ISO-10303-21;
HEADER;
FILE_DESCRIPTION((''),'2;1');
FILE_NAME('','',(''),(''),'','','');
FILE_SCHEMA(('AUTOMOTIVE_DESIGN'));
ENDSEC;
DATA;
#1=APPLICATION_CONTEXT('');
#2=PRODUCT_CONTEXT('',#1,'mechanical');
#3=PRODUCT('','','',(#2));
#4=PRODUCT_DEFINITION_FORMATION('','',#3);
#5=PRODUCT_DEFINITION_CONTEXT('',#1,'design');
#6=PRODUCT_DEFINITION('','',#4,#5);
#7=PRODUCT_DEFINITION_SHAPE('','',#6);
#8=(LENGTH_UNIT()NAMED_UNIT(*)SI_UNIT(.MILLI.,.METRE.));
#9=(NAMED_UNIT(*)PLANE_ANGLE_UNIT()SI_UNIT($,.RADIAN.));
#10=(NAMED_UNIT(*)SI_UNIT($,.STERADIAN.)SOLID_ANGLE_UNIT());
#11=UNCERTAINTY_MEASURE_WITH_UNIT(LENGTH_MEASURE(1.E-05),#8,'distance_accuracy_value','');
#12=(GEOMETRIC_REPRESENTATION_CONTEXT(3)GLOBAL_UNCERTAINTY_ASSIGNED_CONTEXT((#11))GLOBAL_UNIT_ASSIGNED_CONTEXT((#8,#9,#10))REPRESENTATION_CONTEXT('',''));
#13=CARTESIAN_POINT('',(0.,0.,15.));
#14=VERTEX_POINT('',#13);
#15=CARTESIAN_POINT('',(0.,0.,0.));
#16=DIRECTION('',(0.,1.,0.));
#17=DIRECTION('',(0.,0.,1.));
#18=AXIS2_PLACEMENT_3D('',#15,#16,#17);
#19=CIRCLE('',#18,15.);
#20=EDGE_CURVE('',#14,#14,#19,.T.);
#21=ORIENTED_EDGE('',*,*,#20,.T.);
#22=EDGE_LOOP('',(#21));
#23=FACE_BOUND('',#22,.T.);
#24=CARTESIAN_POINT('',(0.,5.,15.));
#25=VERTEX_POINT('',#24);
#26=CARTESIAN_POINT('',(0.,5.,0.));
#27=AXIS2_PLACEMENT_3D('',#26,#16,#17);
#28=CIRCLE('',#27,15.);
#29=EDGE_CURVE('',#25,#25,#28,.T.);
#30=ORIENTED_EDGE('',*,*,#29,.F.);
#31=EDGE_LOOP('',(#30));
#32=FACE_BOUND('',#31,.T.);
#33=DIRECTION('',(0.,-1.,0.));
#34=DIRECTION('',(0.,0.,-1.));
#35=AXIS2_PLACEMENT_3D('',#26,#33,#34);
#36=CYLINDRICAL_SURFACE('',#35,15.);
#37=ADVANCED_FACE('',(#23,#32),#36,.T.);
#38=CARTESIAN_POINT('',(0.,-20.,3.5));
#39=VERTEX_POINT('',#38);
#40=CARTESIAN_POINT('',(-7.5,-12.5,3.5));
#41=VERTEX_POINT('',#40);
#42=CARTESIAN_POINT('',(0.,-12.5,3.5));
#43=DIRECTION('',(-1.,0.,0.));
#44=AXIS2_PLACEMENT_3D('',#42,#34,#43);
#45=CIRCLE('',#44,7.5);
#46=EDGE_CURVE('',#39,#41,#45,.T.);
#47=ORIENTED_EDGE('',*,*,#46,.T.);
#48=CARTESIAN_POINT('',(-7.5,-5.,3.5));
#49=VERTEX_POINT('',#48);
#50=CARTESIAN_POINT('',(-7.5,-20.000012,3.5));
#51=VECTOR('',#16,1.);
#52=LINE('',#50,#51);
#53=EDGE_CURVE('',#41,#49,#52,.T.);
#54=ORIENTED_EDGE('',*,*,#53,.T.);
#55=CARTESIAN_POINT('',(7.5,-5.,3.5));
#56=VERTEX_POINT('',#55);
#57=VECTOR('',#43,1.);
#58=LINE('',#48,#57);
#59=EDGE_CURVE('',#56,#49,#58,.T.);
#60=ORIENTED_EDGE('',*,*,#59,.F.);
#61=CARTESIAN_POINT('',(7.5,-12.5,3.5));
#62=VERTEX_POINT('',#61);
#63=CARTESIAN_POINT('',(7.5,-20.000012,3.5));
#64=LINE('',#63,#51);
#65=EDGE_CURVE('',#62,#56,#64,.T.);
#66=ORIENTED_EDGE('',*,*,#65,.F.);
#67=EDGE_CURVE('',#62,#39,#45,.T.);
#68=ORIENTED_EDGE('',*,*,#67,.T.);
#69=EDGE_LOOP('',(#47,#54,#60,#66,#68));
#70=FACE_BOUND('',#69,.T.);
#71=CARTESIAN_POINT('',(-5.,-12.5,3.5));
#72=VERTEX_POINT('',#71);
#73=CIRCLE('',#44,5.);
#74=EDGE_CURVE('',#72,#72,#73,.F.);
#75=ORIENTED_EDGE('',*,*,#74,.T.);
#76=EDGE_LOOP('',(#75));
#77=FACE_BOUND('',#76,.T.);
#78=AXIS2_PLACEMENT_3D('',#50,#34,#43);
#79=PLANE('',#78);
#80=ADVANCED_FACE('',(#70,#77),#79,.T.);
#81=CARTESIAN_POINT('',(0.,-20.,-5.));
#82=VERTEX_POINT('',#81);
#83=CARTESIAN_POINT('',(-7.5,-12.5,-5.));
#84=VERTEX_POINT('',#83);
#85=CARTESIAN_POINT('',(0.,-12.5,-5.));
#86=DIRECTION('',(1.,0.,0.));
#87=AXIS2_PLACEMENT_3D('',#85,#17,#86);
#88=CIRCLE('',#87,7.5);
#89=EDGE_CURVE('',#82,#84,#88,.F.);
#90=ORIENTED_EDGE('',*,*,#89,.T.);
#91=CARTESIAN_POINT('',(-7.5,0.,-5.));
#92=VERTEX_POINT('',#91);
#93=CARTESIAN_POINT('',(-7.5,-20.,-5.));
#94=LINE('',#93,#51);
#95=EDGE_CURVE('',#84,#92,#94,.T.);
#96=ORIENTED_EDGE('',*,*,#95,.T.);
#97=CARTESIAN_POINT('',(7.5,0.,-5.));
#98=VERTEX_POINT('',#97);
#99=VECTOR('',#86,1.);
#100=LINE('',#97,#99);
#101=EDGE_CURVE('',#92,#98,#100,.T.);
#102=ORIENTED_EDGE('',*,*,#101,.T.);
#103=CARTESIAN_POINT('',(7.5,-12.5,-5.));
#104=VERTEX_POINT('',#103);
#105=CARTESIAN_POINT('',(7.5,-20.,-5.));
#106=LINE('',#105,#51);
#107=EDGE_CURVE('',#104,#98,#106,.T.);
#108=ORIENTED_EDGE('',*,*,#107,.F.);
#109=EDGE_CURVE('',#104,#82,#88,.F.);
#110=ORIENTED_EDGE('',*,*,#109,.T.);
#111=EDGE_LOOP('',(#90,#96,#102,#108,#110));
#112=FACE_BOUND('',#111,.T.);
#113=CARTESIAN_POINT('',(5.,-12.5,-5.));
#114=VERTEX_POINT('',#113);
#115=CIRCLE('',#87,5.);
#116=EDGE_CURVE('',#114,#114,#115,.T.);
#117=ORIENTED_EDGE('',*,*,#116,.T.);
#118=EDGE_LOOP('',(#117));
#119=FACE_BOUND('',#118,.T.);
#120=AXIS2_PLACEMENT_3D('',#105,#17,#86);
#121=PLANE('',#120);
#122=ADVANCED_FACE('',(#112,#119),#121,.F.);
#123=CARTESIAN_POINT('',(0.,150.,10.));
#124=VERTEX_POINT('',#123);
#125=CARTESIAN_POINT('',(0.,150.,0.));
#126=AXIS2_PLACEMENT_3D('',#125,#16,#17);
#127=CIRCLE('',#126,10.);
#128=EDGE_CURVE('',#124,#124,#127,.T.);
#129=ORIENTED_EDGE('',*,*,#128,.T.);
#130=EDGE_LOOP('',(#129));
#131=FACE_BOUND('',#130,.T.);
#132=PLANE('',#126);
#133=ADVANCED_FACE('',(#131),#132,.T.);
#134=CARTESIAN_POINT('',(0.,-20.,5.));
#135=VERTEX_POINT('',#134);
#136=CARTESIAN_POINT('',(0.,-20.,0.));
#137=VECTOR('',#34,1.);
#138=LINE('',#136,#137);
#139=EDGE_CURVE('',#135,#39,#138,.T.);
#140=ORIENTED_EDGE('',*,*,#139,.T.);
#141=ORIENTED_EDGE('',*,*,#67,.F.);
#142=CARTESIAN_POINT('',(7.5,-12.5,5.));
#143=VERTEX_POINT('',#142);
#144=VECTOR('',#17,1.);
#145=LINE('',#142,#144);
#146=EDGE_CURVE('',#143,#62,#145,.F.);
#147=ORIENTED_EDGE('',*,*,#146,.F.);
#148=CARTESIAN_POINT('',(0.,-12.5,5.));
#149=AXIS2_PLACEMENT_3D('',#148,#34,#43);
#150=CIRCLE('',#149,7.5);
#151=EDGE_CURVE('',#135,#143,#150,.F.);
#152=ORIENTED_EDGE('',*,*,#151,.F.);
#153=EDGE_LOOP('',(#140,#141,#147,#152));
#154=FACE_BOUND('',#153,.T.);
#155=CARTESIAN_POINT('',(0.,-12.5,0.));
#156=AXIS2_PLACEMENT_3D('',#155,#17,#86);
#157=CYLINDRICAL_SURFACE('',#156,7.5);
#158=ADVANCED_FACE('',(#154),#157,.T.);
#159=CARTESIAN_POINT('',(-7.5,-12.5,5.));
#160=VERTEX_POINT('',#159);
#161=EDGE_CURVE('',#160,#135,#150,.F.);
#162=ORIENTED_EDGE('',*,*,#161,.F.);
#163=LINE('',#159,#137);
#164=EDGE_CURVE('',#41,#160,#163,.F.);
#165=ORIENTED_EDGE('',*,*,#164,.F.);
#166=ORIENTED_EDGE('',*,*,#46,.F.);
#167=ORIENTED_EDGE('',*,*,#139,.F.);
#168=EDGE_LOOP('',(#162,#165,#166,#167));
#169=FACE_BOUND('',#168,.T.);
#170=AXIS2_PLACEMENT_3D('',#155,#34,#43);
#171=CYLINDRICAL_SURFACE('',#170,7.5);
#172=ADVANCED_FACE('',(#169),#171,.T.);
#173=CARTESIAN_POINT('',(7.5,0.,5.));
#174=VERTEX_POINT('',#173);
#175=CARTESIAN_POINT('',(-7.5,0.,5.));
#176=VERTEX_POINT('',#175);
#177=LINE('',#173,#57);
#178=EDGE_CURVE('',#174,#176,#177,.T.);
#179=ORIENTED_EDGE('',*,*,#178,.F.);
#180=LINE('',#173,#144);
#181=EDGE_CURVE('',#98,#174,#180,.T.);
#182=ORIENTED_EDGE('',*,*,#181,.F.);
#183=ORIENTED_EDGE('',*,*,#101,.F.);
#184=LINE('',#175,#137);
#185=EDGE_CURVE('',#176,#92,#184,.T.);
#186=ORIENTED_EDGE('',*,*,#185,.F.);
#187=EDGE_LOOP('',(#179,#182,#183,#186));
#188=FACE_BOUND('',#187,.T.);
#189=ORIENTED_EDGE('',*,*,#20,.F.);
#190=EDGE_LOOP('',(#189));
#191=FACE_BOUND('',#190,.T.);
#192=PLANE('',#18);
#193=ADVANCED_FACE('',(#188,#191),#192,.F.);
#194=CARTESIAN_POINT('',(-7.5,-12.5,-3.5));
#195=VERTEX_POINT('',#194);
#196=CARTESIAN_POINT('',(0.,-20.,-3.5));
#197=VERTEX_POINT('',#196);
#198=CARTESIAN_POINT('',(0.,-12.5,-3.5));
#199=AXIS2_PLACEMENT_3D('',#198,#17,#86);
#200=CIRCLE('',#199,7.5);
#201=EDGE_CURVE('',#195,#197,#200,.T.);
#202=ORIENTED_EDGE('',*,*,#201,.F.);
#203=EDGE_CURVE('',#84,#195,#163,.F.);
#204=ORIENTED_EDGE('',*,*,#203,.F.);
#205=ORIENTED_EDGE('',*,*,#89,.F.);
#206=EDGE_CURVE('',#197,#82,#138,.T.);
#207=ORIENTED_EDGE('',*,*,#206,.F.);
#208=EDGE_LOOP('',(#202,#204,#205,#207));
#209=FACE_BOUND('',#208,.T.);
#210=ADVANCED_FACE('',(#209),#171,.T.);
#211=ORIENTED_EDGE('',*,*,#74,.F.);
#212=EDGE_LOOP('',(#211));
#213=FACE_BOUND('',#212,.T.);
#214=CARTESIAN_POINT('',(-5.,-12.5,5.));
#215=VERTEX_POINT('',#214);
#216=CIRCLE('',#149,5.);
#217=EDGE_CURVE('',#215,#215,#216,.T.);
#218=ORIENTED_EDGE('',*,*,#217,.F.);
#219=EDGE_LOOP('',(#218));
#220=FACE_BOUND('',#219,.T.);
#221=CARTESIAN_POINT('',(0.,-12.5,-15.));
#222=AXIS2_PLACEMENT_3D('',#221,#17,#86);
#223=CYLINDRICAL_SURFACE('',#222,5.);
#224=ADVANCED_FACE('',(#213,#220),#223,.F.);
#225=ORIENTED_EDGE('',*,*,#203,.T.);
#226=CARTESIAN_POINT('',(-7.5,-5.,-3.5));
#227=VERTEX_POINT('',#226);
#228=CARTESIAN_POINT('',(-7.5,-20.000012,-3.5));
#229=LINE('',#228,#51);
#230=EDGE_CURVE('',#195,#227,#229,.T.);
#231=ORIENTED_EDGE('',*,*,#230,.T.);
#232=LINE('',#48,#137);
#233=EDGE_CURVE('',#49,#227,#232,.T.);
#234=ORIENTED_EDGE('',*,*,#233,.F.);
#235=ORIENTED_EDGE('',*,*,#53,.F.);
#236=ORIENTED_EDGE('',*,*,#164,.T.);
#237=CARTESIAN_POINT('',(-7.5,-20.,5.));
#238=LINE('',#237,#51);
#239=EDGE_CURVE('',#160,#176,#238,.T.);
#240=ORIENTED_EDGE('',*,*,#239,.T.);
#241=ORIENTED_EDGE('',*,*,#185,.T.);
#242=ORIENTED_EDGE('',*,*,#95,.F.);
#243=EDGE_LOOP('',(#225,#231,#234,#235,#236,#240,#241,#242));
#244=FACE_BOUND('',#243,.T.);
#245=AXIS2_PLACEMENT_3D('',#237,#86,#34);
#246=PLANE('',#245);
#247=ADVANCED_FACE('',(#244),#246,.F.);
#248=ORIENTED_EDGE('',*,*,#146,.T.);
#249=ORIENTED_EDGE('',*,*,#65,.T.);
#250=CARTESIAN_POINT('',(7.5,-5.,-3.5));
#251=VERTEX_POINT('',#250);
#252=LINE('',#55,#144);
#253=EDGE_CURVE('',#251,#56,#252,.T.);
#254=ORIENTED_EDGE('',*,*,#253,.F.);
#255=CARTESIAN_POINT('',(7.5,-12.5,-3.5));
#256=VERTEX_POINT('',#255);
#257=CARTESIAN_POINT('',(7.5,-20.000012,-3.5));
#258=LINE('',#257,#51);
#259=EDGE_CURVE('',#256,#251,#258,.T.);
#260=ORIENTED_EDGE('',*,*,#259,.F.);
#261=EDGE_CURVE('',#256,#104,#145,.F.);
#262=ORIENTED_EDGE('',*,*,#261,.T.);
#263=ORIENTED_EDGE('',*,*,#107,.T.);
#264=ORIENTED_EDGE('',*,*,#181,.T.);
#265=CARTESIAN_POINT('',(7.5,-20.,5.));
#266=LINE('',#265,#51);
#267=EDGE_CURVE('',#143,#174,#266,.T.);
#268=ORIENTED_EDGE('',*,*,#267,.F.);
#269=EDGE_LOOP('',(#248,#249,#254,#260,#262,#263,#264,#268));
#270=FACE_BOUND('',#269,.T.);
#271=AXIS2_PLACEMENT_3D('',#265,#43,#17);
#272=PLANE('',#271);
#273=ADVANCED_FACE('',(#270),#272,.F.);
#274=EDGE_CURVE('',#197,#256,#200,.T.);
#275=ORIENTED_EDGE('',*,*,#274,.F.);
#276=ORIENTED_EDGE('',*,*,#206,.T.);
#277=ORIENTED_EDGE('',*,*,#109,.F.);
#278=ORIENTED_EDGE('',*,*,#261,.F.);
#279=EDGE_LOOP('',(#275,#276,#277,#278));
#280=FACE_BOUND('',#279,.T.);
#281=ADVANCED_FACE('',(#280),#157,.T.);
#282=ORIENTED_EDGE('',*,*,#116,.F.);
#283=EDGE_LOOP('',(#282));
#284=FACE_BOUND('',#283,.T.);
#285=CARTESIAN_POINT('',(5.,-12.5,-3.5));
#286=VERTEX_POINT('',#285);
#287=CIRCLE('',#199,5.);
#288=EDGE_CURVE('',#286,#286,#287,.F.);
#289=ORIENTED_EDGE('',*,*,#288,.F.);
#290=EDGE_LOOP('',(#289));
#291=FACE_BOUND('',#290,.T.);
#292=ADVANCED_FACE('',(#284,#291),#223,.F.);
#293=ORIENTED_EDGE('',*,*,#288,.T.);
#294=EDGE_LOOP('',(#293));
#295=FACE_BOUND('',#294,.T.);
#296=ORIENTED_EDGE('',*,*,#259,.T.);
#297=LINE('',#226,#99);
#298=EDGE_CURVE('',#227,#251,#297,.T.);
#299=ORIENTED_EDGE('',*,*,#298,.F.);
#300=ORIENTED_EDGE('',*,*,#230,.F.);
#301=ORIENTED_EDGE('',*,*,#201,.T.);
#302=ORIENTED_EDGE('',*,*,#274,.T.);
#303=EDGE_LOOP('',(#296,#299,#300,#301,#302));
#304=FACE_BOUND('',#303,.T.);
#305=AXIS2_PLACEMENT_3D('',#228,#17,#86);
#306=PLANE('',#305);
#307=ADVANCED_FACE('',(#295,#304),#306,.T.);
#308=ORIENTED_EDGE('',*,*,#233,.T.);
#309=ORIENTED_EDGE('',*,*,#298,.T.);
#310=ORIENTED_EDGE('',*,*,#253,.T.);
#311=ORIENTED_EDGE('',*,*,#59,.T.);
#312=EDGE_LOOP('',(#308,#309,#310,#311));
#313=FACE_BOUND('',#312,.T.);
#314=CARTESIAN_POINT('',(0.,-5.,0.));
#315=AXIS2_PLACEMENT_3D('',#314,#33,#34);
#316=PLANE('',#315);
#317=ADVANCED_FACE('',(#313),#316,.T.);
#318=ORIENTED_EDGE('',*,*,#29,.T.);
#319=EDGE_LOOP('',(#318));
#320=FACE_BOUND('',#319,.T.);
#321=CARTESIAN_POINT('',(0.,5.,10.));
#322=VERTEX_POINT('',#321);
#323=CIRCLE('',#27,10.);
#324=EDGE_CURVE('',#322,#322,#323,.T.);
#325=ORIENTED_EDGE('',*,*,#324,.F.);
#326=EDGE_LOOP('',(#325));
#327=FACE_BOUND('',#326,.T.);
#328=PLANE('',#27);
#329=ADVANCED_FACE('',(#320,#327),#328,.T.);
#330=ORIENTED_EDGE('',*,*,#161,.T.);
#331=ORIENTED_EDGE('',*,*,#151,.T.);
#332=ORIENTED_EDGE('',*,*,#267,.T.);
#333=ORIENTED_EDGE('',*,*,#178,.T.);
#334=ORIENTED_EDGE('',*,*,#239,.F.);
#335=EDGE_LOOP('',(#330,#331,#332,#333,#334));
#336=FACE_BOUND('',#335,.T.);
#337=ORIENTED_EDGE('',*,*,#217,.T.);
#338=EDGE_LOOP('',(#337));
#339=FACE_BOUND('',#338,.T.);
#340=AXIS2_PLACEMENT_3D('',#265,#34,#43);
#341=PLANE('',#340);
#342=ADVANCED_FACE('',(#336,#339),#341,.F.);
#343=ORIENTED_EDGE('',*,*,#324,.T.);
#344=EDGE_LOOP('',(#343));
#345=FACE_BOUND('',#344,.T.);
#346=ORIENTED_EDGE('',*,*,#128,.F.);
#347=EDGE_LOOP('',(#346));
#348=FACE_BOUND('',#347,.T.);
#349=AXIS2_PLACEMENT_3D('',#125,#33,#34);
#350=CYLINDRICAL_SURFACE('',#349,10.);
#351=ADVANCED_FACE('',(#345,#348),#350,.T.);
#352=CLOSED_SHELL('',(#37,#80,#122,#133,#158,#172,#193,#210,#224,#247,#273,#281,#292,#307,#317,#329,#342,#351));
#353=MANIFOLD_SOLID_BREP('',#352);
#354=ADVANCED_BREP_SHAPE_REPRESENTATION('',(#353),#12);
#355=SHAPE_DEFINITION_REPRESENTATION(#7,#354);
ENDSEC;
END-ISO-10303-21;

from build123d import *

# Parameters (mm, degrees)
SKETCH1_R               = 15
BOSS_EXTRUDE1_DEPTH     = 5
SKETCH2_R               = 10
BOSS_EXTRUDE2_DEPTH     = 145
SKETCH3_W               = 15
SKETCH3_H               = 10
BOSS_EXTRUDE3_DEPTH     = 20
CUT_EXTRUDE1_DEPTH      = 153.069063257
CUT_EXTRUDE1_DEPTH_BACK = 153.069063257
SKETCH4_R               = 5
CUT_EXTRUDE2_DEPTH      = 172.31841699
CUT_EXTRUDE2_DEPTH_BACK = 15
SKETCH5_W               = 15
SKETCH5_H               = 7
FILLET1_R               = 7.5


with BuildPart() as part:
    # Sketch1 → Boss-Extrude1 (new body)
    with BuildSketch(Plane(origin=(0, 0, 0), x_dir=(1, 0, 0), z_dir=(0, 1, 0))):
        with Locations(Location((0, 0, 0), (0, 0, 270))):
            Circle(SKETCH1_R)
    extrude(amount=BOSS_EXTRUDE1_DEPTH)

    # Sketch2 → Boss-Extrude2 (add)
    with BuildSketch(Plane(origin=(0, 5, 0), x_dir=(1, 0, 0), z_dir=(0, 1, 0))):
        with Locations(Location((0, 0, 0), (0, 0, 270))):
            Circle(SKETCH2_R)
    extrude(amount=BOSS_EXTRUDE2_DEPTH)

    # Sketch3 → Boss-Extrude3 (add)
    with BuildSketch(Plane.XZ):
        Rectangle(SKETCH3_W, SKETCH3_H)
    extrude(amount=BOSS_EXTRUDE3_DEPTH)

    # Sketch4 → Cut-Extrude1 (cut, two sides: drawn at the far end of the back side and taken through both)
    with BuildSketch(Plane.XY.offset(5).offset(-CUT_EXTRUDE1_DEPTH_BACK)):
        with Locations((0, -12.5)):
            Circle(SKETCH4_R)
    extrude(amount=CUT_EXTRUDE1_DEPTH + CUT_EXTRUDE1_DEPTH_BACK, mode=Mode.SUBTRACT)

    # Sketch5 → Cut-Extrude2 (cut, two sides: drawn at the far end of the back side and taken through both)
    with BuildSketch(Plane.XZ.offset(20).offset(-CUT_EXTRUDE2_DEPTH_BACK)):
        Rectangle(SKETCH5_W, SKETCH5_H)
    extrude(amount=CUT_EXTRUDE2_DEPTH + CUT_EXTRUDE2_DEPTH_BACK, mode=Mode.SUBTRACT)

    # Fillet1
    fillet1_edges = [part.edges().sort_by_distance(p)[0] for p in [
        (7.5, -20, 4.25),
        (7.5, -20, -4.25),
        (-7.5, -20, 4.25),
        (-7.5, -20, -4.25),
    ]]
    fillet(fillet1_edges, radius=FILLET1_R - 0.0001)  # a hair under: the kernel refuses the full size


solid = part.part
